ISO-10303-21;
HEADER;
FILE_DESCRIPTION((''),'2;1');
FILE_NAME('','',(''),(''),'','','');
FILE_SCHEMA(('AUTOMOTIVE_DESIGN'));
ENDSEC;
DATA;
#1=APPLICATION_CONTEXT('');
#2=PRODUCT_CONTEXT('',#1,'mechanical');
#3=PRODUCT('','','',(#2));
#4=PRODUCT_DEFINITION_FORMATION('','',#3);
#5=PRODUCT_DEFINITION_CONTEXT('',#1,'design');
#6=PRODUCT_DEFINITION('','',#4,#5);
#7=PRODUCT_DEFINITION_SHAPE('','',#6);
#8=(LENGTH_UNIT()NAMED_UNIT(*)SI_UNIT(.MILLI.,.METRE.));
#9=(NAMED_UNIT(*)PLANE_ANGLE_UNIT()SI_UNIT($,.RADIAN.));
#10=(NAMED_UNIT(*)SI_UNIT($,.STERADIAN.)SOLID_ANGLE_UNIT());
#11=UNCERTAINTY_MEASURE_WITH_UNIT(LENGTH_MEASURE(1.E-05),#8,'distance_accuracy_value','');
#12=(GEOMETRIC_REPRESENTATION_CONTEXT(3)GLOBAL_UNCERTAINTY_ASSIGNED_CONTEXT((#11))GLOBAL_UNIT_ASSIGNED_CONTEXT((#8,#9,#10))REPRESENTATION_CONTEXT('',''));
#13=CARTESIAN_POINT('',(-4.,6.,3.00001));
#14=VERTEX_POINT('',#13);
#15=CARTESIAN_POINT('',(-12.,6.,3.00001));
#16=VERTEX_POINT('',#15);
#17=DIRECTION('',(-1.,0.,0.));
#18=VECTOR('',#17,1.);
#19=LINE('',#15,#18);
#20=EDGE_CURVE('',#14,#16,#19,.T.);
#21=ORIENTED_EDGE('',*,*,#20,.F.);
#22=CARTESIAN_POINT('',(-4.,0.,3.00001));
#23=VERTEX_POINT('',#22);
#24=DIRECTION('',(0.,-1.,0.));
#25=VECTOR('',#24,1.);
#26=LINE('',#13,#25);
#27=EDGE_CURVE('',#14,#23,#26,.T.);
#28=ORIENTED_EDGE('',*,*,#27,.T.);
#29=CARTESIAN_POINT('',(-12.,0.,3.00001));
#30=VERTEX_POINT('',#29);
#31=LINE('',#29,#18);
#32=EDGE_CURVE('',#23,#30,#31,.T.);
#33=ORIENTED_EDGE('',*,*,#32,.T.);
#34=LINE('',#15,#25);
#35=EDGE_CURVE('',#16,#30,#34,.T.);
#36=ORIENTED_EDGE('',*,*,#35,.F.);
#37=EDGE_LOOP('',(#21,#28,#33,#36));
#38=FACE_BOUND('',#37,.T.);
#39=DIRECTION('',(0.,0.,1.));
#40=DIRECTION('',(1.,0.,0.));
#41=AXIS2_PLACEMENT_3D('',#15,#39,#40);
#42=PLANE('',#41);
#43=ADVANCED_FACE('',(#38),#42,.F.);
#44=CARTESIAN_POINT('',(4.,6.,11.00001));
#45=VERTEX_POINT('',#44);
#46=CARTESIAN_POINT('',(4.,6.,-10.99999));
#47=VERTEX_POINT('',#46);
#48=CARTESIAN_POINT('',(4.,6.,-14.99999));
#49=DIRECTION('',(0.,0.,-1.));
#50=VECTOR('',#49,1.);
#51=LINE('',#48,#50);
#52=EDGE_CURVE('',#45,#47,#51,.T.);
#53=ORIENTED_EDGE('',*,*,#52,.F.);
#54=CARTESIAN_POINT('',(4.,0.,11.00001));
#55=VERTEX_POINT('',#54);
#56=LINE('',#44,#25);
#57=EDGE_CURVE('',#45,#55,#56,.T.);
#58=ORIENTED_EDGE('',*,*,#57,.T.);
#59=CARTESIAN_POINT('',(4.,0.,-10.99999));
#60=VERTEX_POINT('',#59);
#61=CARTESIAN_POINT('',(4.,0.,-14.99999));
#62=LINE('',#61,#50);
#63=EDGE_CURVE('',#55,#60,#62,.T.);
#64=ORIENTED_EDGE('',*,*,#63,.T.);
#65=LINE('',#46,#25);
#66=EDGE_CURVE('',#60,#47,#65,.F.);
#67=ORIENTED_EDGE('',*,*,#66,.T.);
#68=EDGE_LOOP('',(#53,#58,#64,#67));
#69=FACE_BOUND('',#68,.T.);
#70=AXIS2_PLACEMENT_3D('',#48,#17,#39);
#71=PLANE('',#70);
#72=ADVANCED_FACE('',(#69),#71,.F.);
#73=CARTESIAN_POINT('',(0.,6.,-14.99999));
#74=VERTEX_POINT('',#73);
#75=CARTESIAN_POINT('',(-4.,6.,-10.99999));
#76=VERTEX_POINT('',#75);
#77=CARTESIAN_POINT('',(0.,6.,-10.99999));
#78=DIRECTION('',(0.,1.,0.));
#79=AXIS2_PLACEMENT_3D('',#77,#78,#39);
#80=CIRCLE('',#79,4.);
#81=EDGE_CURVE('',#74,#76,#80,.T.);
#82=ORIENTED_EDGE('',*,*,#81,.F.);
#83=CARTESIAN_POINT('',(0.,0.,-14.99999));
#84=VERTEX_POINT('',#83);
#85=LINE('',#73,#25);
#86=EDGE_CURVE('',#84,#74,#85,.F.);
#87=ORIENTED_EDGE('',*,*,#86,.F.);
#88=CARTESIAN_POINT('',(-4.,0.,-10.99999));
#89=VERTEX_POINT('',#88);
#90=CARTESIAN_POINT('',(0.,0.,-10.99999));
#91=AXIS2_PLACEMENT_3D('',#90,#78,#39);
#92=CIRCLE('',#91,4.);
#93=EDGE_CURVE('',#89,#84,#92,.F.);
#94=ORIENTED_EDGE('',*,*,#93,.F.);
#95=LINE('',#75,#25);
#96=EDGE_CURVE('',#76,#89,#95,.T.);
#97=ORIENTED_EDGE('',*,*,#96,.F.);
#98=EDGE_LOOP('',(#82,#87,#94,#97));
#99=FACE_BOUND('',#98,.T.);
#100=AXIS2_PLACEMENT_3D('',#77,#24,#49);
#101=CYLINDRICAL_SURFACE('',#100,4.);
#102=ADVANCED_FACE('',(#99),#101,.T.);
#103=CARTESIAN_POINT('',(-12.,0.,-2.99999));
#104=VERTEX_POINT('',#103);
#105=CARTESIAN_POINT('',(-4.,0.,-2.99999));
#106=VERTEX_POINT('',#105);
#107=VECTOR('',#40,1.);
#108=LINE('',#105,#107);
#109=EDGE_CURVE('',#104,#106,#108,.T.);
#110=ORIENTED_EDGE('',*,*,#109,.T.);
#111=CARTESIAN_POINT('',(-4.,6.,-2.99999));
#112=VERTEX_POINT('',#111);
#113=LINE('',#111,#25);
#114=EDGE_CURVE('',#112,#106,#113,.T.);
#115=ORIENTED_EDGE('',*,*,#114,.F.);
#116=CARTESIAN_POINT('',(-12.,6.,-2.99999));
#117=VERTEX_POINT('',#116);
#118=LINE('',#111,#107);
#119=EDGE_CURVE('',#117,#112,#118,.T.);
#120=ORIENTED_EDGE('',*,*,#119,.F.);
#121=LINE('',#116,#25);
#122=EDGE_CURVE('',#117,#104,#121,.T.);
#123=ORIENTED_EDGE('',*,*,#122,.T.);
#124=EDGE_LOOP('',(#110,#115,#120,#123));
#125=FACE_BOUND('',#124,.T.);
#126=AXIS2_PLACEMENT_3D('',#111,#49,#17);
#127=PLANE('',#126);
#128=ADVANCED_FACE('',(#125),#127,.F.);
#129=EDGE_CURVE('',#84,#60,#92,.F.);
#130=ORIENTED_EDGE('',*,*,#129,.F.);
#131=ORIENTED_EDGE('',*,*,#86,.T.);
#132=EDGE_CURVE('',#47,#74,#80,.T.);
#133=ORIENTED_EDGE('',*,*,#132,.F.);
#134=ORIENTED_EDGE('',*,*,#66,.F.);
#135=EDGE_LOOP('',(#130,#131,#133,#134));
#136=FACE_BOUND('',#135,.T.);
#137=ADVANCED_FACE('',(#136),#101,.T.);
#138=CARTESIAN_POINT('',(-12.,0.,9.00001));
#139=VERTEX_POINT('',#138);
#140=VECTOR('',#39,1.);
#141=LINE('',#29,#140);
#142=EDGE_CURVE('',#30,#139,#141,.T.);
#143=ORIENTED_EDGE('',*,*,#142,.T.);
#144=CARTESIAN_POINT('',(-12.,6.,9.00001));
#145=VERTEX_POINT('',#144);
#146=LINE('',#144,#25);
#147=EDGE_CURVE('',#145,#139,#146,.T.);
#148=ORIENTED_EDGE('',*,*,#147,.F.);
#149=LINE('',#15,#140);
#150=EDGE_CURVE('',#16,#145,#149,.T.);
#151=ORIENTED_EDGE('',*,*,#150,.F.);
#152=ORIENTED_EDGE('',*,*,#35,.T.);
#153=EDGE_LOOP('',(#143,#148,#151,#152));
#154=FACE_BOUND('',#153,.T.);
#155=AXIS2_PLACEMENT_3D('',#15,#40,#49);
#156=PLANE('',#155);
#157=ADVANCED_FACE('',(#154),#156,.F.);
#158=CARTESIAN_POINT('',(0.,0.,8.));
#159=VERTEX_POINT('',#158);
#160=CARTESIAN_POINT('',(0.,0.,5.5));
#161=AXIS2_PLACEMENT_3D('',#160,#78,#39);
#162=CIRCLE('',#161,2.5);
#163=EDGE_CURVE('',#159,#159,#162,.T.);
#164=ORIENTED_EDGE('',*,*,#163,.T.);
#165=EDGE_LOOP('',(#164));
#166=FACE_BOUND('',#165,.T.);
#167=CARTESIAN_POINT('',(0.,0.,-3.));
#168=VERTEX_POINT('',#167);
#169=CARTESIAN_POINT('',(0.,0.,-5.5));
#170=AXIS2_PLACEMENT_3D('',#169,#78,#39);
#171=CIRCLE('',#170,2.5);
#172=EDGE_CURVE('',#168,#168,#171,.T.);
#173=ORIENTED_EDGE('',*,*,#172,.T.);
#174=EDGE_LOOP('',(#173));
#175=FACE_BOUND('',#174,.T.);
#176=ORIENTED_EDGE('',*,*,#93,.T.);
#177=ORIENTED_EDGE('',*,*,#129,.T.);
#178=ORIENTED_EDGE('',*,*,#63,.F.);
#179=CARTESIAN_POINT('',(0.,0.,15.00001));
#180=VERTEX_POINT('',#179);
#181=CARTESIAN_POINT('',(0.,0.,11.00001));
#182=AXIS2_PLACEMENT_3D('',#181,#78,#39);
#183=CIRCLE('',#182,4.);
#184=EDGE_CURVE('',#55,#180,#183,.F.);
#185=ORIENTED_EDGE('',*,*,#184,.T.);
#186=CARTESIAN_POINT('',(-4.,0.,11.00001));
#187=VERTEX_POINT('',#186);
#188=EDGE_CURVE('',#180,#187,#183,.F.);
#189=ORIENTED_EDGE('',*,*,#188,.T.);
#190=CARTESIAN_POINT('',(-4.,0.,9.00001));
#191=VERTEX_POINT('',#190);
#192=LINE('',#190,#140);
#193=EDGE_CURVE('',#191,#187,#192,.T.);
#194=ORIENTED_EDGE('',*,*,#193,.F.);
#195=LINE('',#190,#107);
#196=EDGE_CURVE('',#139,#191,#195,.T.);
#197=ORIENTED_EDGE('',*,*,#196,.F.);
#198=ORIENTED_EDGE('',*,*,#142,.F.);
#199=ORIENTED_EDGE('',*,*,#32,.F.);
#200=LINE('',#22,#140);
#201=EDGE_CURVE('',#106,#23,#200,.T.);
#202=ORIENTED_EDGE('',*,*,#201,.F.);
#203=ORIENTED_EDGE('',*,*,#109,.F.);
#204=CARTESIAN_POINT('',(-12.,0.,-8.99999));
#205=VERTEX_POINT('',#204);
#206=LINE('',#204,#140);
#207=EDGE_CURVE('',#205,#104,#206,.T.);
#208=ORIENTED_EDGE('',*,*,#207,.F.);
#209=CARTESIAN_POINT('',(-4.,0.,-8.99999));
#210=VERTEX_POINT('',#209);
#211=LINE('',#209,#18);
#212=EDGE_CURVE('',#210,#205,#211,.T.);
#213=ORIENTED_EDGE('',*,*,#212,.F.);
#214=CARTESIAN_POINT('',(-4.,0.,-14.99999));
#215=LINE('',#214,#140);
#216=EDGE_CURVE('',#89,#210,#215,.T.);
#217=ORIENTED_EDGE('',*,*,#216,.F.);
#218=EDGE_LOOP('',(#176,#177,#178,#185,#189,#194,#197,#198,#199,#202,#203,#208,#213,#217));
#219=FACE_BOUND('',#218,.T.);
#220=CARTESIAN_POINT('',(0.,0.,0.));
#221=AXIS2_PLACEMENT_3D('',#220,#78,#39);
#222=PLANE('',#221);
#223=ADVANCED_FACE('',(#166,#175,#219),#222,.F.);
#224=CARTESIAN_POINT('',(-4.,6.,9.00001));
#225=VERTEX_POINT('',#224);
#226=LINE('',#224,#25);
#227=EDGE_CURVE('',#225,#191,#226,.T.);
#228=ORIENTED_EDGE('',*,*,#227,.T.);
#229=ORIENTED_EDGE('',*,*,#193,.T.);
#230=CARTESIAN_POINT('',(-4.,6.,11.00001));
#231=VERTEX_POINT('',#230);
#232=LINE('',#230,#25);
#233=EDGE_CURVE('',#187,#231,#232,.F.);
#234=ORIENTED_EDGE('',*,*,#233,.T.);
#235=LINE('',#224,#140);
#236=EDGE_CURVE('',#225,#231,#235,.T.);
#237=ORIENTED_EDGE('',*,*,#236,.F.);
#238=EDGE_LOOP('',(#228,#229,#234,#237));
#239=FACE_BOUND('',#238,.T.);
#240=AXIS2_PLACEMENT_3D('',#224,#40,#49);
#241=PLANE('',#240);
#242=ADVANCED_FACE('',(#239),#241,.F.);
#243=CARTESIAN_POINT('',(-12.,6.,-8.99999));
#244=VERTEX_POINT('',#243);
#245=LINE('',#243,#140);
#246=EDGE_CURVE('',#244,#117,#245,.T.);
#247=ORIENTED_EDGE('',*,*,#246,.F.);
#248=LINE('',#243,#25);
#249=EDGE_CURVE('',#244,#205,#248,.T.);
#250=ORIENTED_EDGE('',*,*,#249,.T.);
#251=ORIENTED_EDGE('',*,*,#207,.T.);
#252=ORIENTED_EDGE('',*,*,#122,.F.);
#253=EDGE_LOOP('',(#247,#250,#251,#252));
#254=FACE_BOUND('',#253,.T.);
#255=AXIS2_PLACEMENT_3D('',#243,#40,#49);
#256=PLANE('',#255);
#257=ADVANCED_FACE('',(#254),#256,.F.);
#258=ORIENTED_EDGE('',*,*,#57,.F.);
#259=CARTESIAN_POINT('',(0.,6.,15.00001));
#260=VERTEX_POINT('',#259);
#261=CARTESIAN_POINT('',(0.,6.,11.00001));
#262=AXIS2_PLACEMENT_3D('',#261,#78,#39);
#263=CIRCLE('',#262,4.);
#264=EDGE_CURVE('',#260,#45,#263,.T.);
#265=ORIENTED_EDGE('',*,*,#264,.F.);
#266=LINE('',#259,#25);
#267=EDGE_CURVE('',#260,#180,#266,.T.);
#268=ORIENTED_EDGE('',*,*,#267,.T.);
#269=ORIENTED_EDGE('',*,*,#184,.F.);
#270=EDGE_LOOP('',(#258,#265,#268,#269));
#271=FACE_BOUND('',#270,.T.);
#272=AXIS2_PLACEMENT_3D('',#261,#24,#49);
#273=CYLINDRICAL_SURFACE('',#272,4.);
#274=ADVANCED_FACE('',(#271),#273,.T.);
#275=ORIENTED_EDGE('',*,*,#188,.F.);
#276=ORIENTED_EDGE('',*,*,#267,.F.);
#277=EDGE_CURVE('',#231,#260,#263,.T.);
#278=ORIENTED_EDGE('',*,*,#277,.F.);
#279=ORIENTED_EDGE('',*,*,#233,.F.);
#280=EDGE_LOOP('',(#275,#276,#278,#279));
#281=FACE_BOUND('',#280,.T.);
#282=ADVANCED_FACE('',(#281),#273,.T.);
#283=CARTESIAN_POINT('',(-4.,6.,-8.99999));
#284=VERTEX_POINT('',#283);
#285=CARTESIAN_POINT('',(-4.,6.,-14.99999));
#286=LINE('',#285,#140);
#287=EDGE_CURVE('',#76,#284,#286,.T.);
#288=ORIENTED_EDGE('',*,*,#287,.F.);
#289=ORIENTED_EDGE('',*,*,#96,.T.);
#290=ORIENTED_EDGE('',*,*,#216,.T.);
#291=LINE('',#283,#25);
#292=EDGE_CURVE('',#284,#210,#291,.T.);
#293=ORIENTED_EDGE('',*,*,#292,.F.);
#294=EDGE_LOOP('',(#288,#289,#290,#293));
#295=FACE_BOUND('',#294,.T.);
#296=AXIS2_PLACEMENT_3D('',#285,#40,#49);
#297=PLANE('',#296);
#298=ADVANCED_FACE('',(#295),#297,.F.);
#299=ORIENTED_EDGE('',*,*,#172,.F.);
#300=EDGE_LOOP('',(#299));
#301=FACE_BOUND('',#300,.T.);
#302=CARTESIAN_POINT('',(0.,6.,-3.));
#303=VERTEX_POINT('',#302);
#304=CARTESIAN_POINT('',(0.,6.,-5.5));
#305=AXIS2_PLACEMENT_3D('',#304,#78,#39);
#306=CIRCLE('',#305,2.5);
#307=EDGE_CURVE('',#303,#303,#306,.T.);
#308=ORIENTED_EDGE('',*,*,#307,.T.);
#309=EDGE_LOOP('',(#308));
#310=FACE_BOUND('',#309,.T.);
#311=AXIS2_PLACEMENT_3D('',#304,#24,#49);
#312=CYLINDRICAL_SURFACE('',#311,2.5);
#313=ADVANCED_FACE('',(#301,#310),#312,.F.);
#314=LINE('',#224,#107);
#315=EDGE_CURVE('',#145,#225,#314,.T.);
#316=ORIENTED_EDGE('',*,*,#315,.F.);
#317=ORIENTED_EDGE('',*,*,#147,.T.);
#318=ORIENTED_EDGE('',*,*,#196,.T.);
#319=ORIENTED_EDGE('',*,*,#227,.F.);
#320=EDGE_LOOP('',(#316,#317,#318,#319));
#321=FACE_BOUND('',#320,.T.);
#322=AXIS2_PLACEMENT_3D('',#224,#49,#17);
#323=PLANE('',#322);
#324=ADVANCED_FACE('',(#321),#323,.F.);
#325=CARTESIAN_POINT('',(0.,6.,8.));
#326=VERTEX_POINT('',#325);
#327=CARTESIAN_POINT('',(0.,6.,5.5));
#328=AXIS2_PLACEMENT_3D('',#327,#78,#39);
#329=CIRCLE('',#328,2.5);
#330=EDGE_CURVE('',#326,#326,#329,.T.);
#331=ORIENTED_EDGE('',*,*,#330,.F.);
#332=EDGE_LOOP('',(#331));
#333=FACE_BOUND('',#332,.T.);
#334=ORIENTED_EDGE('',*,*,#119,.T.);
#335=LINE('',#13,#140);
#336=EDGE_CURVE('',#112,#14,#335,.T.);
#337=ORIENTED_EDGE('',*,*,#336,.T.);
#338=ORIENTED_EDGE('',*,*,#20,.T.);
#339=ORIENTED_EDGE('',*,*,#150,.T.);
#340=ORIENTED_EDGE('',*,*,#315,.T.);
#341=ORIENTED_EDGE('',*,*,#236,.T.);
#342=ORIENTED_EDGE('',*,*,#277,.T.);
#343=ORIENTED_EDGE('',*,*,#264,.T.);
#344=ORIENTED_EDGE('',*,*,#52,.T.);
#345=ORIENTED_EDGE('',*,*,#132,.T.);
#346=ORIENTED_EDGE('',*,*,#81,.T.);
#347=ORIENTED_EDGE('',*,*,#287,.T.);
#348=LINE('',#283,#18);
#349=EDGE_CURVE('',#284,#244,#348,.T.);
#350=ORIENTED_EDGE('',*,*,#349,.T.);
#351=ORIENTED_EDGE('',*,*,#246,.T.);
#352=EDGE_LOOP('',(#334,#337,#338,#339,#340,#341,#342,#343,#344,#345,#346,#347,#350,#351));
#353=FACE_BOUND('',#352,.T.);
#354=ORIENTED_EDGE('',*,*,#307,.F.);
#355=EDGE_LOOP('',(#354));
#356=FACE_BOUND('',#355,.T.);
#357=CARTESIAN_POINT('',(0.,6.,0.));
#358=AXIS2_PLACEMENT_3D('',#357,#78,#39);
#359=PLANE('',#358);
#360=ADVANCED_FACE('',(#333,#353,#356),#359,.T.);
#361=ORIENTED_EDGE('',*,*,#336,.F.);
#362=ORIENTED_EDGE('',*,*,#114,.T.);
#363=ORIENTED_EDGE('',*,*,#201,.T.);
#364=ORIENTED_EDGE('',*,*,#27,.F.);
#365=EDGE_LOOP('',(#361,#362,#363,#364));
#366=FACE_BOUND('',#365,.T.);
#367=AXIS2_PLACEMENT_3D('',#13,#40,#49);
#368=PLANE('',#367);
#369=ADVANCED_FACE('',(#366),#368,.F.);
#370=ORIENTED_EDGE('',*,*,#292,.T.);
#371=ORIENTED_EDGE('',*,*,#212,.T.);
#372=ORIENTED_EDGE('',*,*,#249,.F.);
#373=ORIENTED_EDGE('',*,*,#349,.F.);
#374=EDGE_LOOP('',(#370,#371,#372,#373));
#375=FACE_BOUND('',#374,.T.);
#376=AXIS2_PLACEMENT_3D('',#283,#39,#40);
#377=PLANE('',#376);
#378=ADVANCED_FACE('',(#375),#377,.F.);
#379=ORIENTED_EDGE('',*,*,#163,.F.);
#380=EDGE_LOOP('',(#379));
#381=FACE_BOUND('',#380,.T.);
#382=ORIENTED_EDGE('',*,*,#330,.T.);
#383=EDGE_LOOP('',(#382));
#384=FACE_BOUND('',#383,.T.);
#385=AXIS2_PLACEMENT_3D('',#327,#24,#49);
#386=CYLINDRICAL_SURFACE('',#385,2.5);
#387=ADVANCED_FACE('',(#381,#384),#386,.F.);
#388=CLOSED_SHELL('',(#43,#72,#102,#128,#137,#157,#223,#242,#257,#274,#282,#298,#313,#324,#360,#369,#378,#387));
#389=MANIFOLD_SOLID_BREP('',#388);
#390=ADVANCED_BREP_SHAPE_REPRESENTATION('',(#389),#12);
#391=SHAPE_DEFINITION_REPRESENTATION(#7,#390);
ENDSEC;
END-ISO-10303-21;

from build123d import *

# Parameters (mm, degrees)
SKETCH1_R           = 2.5
BOSS_EXTRUDE1_DEPTH = 6
FILLET1_R           = 4


with BuildPart() as part:
    # Sketch1 → Boss-Extrude1 (new body)
    with BuildSketch(Plane(origin=(0, 0, 0), x_dir=(1, 0, 0), z_dir=(0, 1, 0))):
        Polygon((-4, 14.999990394), (-4, 8.999990394), (-12, 8.999990394), (-12, 2.999990394), (-4, 2.999990394), (-4, -3.000009606), (-12, -3.000009606), (-12, -9.000009606), (-4, -9.000009606), (-4, -15.000009606), (4, -15.000009606), (4, 14.999990394), align=None)
        with Locations(Location((0, 5.5, 0), (0, 0, 270))):
            Circle(SKETCH1_R, mode=Mode.SUBTRACT)
        with Locations(Location((0, -5.5, 0), (0, 0, 270))):
            Circle(SKETCH1_R, mode=Mode.SUBTRACT)
    extrude(amount=BOSS_EXTRUDE1_DEPTH)

    # Fillet1
    fillet1_edges = [part.edges().sort_by_distance(p)[0] for p in [
        (-4, 3, 15.000009606),
        (-4, 3, -14.999990394),
        (4, 3, 15.000009606),
        (4, 3, -14.999990394),
    ]]
    fillet(fillet1_edges, radius=FILLET1_R - 0.0001)  # a hair under: the kernel refuses the full size


solid = part.part
